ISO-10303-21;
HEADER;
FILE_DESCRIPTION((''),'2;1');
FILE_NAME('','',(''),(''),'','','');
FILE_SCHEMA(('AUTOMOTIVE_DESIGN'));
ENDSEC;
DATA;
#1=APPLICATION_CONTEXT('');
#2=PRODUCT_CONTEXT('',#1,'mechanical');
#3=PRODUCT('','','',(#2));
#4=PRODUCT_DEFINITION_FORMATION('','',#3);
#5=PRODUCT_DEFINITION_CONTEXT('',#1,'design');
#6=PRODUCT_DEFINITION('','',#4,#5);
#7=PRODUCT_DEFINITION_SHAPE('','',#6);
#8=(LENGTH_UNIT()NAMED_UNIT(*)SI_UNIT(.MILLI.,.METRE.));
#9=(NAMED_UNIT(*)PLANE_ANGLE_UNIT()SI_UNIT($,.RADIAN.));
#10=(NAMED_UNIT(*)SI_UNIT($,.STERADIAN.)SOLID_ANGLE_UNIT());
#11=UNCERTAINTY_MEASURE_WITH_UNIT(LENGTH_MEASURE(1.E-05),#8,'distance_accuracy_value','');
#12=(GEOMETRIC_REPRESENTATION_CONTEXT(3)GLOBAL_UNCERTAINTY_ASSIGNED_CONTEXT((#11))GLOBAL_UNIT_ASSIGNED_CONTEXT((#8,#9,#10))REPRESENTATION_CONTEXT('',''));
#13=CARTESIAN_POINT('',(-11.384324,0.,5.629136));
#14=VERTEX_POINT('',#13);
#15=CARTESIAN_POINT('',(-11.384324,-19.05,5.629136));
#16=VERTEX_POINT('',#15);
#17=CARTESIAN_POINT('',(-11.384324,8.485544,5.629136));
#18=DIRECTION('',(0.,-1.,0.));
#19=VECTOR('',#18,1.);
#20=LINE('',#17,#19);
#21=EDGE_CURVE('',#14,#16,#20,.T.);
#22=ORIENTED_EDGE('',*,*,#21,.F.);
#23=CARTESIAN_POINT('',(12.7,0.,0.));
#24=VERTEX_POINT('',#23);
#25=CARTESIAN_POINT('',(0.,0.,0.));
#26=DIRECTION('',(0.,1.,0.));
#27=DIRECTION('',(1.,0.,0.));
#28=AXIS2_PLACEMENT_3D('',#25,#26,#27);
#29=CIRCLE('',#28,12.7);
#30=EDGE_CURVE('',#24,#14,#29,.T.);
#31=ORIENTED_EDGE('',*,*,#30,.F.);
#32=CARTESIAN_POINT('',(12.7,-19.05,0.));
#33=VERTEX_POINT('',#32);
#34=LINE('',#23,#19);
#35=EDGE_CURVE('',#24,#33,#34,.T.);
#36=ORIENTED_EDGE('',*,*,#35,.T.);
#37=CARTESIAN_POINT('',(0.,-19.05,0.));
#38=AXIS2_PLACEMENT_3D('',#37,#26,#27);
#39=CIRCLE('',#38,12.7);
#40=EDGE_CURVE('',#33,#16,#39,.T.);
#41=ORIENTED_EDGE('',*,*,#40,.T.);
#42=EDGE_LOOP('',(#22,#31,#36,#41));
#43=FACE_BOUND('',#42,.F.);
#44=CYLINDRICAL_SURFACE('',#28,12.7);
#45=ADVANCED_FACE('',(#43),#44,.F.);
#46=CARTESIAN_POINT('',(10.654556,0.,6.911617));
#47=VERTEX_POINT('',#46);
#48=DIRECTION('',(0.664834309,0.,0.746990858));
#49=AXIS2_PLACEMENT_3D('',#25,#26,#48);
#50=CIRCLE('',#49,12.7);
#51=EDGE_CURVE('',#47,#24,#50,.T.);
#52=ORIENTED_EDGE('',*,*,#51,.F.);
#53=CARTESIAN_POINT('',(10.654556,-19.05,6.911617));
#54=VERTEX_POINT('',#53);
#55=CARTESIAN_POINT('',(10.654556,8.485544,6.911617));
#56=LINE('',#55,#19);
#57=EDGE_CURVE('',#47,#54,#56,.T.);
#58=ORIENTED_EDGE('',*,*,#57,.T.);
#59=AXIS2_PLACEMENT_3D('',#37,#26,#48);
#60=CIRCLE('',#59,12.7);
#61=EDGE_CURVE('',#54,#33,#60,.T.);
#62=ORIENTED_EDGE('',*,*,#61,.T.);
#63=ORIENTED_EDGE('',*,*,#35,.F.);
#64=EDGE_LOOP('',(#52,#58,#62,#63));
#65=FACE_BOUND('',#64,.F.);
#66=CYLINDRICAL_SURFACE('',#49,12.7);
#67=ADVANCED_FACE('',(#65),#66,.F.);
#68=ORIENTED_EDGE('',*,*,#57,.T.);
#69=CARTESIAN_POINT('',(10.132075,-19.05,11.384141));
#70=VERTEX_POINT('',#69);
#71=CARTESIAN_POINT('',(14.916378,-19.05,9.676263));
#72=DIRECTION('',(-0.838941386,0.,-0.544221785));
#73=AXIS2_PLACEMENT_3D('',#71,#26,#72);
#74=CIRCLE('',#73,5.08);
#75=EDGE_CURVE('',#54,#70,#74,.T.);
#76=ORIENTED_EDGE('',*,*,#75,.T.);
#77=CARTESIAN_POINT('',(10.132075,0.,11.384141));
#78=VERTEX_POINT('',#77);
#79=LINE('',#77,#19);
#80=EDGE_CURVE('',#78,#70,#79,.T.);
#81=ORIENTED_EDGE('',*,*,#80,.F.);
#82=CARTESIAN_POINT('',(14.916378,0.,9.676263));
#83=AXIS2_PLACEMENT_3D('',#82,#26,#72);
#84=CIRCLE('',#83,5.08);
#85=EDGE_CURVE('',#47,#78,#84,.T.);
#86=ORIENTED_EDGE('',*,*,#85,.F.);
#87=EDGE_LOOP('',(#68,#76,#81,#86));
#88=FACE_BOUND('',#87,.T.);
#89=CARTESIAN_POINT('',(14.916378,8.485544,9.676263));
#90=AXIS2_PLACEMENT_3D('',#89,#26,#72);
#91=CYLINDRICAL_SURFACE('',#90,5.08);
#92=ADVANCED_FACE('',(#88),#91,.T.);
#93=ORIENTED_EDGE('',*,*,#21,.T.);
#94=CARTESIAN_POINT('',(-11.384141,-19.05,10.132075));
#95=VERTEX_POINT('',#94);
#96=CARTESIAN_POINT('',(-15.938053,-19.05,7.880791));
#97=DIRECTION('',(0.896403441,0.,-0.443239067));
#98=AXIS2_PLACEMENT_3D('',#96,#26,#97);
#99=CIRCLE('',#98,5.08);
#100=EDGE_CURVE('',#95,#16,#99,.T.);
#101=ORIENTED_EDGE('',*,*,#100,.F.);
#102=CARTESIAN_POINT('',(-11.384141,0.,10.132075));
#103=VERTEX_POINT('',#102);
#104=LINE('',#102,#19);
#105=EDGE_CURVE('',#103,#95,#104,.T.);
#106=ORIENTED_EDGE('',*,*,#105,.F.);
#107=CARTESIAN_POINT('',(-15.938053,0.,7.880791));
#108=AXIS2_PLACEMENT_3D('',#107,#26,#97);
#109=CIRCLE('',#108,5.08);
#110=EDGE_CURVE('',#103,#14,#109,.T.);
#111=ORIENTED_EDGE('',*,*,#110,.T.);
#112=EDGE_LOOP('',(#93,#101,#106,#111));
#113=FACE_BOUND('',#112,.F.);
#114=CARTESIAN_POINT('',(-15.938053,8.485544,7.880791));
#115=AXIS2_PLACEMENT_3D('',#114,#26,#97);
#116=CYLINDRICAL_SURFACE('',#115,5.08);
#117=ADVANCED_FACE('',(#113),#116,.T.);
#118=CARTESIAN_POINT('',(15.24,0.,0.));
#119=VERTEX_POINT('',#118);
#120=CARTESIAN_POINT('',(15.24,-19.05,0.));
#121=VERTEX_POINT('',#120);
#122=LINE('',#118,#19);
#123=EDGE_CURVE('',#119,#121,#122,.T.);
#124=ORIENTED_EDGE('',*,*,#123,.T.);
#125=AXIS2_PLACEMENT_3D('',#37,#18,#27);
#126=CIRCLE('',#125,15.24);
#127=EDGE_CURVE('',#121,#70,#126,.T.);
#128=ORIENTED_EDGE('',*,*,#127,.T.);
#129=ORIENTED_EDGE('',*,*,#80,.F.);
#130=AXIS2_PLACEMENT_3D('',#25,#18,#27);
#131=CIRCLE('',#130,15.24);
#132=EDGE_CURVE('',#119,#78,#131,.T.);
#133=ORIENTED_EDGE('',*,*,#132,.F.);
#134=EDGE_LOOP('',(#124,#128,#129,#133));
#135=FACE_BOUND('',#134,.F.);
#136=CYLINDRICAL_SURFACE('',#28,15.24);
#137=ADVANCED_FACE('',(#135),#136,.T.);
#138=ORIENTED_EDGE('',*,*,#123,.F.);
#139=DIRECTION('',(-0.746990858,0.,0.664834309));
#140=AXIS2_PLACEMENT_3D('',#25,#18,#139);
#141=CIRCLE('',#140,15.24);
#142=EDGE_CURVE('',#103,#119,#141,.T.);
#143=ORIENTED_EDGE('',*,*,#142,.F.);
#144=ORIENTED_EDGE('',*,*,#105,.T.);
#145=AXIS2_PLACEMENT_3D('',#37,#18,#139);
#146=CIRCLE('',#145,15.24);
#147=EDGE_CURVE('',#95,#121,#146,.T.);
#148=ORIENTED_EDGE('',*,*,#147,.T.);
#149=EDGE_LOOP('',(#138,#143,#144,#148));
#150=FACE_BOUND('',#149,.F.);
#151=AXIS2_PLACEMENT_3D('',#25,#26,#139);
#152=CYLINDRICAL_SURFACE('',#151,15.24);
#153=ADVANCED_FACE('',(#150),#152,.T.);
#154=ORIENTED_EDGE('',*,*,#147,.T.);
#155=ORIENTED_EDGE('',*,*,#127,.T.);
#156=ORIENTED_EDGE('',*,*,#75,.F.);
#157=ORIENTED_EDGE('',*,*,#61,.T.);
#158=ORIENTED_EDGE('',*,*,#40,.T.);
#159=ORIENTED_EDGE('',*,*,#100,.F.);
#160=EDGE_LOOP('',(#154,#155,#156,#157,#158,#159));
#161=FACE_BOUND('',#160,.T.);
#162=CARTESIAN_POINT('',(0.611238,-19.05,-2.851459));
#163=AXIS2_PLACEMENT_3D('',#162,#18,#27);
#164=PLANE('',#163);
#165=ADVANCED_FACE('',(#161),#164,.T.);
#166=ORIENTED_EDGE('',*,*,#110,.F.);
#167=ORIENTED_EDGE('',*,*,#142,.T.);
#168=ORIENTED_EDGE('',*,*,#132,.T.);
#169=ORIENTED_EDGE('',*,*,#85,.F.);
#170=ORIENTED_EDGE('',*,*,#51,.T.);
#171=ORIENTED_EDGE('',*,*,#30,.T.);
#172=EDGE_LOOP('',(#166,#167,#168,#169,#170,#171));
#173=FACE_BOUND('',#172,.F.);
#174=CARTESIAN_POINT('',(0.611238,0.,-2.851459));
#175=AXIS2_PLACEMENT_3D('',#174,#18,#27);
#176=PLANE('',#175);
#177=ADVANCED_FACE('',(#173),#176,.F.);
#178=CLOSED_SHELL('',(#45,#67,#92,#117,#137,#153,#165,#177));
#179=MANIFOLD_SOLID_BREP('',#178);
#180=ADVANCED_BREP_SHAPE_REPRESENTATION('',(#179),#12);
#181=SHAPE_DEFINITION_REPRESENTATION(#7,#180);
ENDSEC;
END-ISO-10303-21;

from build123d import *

# Parameters (mm, degrees)
F1_DEPTH    = 19.05
F2_T1_DEPTH = 36.0210888614


# Not quite as in the source:
# - a fillet or chamfer that OpenCascade refuses, or shapes differently, is made with other operations: its cross-section is extruded or revolved along the edge and cut away or added


with BuildPart() as f1:
    # F0 (on Front) → F1 (new body)
    with BuildSketch(Plane.XZ):
        with BuildLine():
            ThreePointArc((8.4433957221, 9.4867838955), (11.5870860373, 5.1989842435), (12.7, 0))
            ThreePointArc((12.7, 0), (-4.5170700973, -11.869544125), (-9.4867838955, 8.4433957221))
            Line((-9.4867838955, 8.4433957221), (-11.3841406746, 10.1320748666))
            ThreePointArc((-11.3841406746, 10.1320748666), (-5.4204841167, -14.24345295), (15.24, 0))
            ThreePointArc((15.24, 0), (13.9045032448, 6.2387810922), (10.1320748666, 11.3841406746))
            Line((10.1320748666, 11.3841406746), (8.4433957221, 9.4867838955))
        make_face()
    extrude(amount=F1_DEPTH)

    # F2: fillet of radius 5.08 on 2 edges, made by hand

    # F2_s2 → F2_t1 (cut)
    with BuildSketch(Plane.XZ.offset(-8.4855444307)):
        with BuildLine():
            ThreePointArc((-11.3843237056, 5.6291361473), (-10.8580531921, 7.8805841193), (-11.3841406746, 10.1320748666))
            Line((-11.3841406746, 10.1320748666), (-9.4867838955, 8.4433957221))
            ThreePointArc((-9.4867838955, 8.4433957221), (-10.5299951264, 7.0999438475), (-11.3843237056, 5.6291361473))
        make_face()
        with BuildLine():
            ThreePointArc((10.6545556025, 6.9116166642), (9.8706902669, 9.0868255644), (10.1320748666, 11.3841406746))
            Line((10.1320748666, 11.3841406746), (8.4433957221, 9.4867838955))
            ThreePointArc((8.4433957221, 9.4867838955), (9.6353934931, 8.2734026998), (10.6545556025, 6.9116166642))
        make_face()
    extrude(amount=F2_T1_DEPTH, mode=Mode.SUBTRACT)


solid = f1.part
